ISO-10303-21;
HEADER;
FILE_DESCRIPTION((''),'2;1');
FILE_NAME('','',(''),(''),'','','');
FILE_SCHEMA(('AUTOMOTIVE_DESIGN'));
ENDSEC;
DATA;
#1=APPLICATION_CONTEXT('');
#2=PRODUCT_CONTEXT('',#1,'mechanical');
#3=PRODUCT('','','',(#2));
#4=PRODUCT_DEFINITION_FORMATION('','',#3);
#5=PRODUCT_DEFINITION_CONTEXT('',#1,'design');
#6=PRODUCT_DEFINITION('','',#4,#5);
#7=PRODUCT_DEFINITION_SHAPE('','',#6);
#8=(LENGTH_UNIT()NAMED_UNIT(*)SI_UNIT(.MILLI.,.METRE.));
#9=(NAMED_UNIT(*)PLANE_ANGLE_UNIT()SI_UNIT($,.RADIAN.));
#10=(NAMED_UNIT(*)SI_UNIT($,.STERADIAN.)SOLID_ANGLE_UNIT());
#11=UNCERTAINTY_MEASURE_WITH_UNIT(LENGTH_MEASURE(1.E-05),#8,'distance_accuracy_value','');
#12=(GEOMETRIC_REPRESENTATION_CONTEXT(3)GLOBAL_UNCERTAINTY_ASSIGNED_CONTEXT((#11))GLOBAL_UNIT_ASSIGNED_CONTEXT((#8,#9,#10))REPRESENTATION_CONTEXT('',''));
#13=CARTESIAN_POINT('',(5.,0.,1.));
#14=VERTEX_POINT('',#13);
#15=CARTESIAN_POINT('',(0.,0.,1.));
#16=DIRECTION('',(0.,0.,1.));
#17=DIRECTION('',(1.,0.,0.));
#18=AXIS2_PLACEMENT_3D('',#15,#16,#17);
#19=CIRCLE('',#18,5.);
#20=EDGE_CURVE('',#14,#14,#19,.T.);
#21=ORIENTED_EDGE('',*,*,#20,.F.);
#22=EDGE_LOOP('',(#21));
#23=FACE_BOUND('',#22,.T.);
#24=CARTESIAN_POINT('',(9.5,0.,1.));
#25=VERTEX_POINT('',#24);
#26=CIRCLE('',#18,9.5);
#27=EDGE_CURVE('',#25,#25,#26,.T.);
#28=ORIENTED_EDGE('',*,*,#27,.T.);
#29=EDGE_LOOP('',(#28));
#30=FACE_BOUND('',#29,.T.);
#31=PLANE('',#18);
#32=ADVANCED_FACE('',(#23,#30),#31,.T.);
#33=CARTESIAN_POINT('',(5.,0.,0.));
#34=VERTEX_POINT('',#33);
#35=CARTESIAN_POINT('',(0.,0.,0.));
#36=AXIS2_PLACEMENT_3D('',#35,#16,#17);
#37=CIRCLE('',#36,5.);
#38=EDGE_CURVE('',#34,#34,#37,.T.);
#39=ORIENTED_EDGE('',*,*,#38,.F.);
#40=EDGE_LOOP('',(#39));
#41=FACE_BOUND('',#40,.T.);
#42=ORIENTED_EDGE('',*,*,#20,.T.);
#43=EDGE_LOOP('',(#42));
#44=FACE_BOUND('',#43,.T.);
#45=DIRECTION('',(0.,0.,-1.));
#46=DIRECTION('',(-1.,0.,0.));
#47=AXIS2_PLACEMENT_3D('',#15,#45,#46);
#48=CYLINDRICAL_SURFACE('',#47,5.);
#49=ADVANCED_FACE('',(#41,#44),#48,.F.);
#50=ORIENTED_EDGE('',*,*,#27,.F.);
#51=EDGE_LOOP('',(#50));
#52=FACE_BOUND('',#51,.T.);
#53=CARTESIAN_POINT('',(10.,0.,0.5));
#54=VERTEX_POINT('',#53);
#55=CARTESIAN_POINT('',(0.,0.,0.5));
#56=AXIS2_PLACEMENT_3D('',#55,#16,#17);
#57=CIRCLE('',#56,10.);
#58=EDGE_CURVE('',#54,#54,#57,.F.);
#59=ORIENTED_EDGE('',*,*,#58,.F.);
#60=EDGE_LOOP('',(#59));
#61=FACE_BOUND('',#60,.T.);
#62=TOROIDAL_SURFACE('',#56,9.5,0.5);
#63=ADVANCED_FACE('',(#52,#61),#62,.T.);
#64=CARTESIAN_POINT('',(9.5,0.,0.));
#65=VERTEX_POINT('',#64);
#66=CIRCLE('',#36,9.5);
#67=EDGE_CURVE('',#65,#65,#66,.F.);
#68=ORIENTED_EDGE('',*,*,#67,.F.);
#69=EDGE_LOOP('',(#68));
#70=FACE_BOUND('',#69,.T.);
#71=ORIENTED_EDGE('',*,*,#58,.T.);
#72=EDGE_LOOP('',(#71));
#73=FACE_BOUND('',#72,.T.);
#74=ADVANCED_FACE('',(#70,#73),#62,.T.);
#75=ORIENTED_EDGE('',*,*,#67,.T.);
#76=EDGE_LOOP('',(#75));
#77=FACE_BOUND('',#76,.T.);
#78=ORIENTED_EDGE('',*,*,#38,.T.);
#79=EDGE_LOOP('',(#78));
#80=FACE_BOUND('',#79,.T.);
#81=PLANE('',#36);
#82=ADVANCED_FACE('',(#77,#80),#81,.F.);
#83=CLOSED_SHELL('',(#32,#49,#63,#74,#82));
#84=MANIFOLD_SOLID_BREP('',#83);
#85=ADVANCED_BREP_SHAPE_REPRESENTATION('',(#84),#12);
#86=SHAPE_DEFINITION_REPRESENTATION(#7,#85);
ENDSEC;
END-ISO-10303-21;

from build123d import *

# Parameters (mm, degrees)
SKETCH1_R           = 10
SKETCH1_R_2         = 5
BOSS_EXTRUDE1_DEPTH = 1
FILLET1_R           = 0.5


with BuildPart() as part:
    # Sketch1 → Boss-Extrude1 (new body)
    with BuildSketch(Plane.XY):
        Circle(SKETCH1_R)
        Circle(SKETCH1_R_2, mode=Mode.SUBTRACT)
    extrude(amount=BOSS_EXTRUDE1_DEPTH)

    # Fillet1
    fillet1_edges = [part.edges().sort_by_distance(p)[0] for p in [
        (-10, 0, 0),
        (-10, 0, 1),
    ]]
    fillet(fillet1_edges, radius=FILLET1_R - 0.0001)  # a hair under: the kernel refuses the full size


solid = part.part
